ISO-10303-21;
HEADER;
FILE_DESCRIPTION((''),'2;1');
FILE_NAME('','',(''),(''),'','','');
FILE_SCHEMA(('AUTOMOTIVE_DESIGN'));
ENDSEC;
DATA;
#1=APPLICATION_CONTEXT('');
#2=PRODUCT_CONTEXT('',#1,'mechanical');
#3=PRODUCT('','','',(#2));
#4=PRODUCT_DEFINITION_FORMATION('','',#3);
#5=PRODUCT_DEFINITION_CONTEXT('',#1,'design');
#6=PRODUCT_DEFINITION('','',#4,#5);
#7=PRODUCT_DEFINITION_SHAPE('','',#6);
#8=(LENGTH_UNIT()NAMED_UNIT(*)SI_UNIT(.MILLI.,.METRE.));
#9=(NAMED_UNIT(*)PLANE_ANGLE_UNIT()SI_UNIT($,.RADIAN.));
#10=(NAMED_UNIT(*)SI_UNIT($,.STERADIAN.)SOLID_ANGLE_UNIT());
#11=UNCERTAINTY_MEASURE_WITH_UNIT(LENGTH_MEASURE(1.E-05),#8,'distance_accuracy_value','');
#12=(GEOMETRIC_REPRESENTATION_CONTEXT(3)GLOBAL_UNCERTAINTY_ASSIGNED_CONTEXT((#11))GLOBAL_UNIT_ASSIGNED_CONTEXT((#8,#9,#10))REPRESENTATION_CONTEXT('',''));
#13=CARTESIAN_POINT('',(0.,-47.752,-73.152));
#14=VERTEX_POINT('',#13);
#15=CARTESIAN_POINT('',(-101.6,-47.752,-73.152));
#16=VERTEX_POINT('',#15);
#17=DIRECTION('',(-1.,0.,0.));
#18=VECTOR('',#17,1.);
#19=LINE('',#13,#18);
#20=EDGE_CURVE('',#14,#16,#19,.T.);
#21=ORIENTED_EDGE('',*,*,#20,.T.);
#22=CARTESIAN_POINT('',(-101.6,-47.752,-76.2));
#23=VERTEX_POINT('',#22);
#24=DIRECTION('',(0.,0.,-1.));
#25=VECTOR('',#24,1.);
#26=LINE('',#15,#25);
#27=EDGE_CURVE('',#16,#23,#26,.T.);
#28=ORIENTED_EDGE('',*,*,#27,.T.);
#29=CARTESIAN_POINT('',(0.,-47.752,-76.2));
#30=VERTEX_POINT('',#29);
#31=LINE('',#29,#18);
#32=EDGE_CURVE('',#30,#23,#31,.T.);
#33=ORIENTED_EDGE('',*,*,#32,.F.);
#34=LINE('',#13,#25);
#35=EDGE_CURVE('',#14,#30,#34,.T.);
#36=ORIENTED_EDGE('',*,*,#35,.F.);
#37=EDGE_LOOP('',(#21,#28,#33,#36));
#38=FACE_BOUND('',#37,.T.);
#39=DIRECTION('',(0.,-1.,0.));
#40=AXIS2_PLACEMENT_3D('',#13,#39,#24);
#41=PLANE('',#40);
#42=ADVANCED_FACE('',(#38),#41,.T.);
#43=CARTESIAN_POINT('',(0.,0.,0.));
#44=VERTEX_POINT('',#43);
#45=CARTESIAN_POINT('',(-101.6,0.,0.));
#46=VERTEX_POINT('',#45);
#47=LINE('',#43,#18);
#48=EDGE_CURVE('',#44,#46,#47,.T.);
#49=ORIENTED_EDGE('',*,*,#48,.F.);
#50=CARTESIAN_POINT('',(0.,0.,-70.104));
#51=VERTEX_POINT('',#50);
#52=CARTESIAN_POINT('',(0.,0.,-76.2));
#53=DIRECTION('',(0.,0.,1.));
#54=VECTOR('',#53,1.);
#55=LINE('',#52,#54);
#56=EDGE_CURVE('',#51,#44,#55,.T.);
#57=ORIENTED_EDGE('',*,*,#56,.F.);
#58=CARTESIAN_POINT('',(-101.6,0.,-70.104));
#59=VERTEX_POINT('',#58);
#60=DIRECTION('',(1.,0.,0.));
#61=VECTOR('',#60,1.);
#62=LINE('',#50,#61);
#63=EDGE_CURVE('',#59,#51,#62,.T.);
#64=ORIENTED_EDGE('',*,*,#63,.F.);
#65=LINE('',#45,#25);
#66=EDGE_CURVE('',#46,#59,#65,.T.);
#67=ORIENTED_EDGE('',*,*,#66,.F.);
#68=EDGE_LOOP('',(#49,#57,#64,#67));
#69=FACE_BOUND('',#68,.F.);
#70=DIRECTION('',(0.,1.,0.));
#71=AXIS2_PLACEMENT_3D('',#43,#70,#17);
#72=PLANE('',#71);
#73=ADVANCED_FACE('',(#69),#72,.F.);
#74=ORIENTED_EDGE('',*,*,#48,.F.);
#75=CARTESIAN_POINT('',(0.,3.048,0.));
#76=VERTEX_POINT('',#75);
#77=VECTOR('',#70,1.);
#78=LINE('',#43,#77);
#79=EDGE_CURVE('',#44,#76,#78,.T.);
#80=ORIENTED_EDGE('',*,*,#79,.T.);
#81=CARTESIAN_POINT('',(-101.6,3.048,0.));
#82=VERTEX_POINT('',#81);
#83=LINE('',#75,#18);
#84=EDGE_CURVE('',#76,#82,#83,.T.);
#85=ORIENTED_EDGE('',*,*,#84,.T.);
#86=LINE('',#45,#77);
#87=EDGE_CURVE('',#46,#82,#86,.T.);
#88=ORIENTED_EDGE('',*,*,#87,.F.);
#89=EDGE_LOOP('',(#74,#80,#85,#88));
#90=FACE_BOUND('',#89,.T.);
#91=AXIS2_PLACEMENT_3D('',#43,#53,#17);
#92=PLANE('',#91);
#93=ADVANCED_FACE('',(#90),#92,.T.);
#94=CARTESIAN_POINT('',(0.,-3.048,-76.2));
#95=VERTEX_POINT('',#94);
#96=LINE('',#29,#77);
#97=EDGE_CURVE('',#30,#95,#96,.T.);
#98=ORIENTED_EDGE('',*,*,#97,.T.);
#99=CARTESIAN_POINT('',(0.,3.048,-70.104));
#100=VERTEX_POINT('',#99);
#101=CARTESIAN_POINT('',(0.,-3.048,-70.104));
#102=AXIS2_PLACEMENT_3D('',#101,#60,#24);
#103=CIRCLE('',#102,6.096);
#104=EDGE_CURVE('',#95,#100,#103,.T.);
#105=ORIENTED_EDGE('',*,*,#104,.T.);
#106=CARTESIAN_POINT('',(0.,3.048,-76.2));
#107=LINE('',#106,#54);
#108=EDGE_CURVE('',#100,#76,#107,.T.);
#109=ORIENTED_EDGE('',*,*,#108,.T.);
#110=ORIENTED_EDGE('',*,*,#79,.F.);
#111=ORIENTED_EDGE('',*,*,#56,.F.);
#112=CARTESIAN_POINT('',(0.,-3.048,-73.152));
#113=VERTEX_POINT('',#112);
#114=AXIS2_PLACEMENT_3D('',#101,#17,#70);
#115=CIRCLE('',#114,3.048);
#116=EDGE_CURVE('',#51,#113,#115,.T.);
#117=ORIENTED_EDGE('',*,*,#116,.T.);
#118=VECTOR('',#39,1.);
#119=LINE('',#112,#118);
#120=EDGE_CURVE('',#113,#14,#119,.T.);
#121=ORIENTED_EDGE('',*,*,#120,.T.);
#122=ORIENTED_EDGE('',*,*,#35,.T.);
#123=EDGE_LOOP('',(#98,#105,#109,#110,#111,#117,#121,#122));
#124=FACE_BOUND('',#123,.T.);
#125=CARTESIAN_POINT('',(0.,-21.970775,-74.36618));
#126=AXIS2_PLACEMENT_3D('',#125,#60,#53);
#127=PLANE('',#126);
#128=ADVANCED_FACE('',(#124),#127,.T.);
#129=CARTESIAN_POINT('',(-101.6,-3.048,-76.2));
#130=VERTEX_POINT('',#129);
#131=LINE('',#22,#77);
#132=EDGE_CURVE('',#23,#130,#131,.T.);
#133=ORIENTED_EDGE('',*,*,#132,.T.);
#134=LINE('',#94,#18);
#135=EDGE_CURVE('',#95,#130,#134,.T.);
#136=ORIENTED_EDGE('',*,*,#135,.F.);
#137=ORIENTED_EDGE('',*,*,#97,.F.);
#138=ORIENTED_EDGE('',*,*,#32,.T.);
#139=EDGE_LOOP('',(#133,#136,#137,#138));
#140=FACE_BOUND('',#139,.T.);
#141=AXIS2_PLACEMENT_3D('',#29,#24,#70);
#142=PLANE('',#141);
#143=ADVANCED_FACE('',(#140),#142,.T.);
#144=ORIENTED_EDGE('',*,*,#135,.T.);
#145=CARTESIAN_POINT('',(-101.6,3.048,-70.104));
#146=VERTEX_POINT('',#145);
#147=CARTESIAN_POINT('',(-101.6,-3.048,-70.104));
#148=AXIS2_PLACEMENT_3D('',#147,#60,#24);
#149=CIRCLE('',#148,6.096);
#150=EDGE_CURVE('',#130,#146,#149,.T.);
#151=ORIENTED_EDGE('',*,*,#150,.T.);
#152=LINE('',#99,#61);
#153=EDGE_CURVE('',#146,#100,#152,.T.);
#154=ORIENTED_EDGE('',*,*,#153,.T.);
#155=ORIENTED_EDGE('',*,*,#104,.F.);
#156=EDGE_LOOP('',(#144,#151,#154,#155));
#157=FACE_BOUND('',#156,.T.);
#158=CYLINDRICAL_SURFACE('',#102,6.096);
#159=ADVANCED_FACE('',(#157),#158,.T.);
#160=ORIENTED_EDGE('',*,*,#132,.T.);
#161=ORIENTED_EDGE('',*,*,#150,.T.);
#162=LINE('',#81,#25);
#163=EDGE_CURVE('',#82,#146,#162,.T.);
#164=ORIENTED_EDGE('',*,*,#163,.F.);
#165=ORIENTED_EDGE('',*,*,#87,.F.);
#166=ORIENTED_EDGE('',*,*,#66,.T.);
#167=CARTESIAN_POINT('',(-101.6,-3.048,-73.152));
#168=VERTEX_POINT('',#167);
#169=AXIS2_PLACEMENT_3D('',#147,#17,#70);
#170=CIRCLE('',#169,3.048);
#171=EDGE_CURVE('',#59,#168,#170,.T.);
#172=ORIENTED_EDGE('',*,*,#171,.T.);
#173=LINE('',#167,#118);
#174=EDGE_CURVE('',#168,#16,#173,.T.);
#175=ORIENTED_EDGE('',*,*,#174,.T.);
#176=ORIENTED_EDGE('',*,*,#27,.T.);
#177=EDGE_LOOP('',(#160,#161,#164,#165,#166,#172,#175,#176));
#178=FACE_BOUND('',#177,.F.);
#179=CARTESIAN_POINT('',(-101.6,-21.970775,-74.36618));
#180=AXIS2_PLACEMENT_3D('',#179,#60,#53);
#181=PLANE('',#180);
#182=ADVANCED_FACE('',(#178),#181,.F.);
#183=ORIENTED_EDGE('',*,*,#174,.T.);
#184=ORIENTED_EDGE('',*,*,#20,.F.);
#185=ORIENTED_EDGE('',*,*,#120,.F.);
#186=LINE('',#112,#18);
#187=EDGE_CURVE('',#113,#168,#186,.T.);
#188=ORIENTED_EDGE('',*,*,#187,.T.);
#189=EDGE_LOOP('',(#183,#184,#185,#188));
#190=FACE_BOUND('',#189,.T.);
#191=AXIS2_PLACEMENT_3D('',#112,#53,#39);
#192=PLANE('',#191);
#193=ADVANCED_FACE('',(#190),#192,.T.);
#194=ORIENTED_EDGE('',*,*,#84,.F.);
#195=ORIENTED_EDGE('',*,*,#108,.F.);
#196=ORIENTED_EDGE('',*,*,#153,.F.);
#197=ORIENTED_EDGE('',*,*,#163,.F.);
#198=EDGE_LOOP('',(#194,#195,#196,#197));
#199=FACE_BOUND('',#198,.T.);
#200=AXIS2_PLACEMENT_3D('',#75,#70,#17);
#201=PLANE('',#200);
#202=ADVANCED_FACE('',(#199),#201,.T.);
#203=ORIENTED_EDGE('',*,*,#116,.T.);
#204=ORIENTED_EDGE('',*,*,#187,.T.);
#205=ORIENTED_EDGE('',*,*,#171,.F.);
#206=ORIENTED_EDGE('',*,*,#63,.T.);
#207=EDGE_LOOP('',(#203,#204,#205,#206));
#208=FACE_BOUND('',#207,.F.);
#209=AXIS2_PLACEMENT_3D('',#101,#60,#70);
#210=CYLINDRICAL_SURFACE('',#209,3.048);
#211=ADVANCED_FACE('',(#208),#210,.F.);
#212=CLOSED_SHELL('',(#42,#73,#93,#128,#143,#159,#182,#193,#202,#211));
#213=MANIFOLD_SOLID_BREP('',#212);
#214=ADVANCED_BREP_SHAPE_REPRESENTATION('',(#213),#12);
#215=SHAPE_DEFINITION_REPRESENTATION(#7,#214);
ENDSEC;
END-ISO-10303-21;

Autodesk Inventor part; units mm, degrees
ref_plane "YZ Plane" through (0, 0, 0) normal (1, 0, 0) x (0, 1, 0)
ref_plane "XZ Plane" through (0, 0, 0) normal (0, 1, 0) x (-1, 0, 0)
ref_plane "XY Plane" through (0, 0, 0) normal (0, 0, 1) x (1, 0, 0)
sketch "Sketch1" plane through (0, 0, 0) normal (0, 1, 0) x (-1, 0, 0)
  line L0 (0, 0) -> (101.6, 0)
  line L1 (101.6, 0) -> (101.6, -76.2)
  line L2 (101.6, -76.2) -> (0, -76.2)
  line L3 (0, -76.2) -> (0, 0)
  dimension "d0" = 101.6
  dimension "d1" = 76.2
extrude "Plate1" add sketch "Sketch1" along normal blind 3.048
sketch "Sketch2" plane through (0, 3.048, -73.152) normal (0, 0, -1) x (-1, 0, 0)
  line L0 (101.6, 0) -> (0, 0)
  line L1 (0, 0) -> (0, -50.8)
  line L2 (0, -50.8) -> (101.6, -50.8)
  line L3 (101.6, -50.8) -> (101.6, 0)
edge flange "Flange1" height 50.8 angle 90 thickness 3.048 bend radius 3.048 thickness toward (0, 0, -1) relief tear relief width 3.048 relief depth 1.524 edges at (-50.8, 0, -76.2) wall of the first edge with corners at (-101.6, 3.048, -73.152) (0, 3.048, -73.152) (0, -47.752, -73.152) (-101.6, -47.752, -73.152)
bend "Bend1"
corner "Corner1"
equation "\"d3\" = BendReliefWidth"
equation "\"d4\" = BendReliefDepth"
equation "\"d5\" = MinimumRemnant"
equation "\"d6\" = BendRadius"
equation "\"d9\" = BendRadius"
equation "\"d10\" = CornerReliefSize"
equation "\"d11\" = GapSize"
equation "\"d12\" = JacobiRadiusSize"
equation "\"BendRadius\" = Thickness"
equation "\"BendReliefWidth\" = Thickness"
equation "\"BendReliefDepth\" = 0.5 * Thickness"
equation "\"CornerReliefSize\" = 4 * Thickness"
equation "\"MinimumRemnant\" = 2 * Thickness"
equation "\"TransitionRadius\" = BendRadius"
equation "\"JacobiRadiusSize\" = BendRadius"
equation "\"GapSize\" = Thickness"
equation "\"d2\" = BendRadius"
equation "\"Thickness\" = 3.048"
properties part number "motorBracket"
